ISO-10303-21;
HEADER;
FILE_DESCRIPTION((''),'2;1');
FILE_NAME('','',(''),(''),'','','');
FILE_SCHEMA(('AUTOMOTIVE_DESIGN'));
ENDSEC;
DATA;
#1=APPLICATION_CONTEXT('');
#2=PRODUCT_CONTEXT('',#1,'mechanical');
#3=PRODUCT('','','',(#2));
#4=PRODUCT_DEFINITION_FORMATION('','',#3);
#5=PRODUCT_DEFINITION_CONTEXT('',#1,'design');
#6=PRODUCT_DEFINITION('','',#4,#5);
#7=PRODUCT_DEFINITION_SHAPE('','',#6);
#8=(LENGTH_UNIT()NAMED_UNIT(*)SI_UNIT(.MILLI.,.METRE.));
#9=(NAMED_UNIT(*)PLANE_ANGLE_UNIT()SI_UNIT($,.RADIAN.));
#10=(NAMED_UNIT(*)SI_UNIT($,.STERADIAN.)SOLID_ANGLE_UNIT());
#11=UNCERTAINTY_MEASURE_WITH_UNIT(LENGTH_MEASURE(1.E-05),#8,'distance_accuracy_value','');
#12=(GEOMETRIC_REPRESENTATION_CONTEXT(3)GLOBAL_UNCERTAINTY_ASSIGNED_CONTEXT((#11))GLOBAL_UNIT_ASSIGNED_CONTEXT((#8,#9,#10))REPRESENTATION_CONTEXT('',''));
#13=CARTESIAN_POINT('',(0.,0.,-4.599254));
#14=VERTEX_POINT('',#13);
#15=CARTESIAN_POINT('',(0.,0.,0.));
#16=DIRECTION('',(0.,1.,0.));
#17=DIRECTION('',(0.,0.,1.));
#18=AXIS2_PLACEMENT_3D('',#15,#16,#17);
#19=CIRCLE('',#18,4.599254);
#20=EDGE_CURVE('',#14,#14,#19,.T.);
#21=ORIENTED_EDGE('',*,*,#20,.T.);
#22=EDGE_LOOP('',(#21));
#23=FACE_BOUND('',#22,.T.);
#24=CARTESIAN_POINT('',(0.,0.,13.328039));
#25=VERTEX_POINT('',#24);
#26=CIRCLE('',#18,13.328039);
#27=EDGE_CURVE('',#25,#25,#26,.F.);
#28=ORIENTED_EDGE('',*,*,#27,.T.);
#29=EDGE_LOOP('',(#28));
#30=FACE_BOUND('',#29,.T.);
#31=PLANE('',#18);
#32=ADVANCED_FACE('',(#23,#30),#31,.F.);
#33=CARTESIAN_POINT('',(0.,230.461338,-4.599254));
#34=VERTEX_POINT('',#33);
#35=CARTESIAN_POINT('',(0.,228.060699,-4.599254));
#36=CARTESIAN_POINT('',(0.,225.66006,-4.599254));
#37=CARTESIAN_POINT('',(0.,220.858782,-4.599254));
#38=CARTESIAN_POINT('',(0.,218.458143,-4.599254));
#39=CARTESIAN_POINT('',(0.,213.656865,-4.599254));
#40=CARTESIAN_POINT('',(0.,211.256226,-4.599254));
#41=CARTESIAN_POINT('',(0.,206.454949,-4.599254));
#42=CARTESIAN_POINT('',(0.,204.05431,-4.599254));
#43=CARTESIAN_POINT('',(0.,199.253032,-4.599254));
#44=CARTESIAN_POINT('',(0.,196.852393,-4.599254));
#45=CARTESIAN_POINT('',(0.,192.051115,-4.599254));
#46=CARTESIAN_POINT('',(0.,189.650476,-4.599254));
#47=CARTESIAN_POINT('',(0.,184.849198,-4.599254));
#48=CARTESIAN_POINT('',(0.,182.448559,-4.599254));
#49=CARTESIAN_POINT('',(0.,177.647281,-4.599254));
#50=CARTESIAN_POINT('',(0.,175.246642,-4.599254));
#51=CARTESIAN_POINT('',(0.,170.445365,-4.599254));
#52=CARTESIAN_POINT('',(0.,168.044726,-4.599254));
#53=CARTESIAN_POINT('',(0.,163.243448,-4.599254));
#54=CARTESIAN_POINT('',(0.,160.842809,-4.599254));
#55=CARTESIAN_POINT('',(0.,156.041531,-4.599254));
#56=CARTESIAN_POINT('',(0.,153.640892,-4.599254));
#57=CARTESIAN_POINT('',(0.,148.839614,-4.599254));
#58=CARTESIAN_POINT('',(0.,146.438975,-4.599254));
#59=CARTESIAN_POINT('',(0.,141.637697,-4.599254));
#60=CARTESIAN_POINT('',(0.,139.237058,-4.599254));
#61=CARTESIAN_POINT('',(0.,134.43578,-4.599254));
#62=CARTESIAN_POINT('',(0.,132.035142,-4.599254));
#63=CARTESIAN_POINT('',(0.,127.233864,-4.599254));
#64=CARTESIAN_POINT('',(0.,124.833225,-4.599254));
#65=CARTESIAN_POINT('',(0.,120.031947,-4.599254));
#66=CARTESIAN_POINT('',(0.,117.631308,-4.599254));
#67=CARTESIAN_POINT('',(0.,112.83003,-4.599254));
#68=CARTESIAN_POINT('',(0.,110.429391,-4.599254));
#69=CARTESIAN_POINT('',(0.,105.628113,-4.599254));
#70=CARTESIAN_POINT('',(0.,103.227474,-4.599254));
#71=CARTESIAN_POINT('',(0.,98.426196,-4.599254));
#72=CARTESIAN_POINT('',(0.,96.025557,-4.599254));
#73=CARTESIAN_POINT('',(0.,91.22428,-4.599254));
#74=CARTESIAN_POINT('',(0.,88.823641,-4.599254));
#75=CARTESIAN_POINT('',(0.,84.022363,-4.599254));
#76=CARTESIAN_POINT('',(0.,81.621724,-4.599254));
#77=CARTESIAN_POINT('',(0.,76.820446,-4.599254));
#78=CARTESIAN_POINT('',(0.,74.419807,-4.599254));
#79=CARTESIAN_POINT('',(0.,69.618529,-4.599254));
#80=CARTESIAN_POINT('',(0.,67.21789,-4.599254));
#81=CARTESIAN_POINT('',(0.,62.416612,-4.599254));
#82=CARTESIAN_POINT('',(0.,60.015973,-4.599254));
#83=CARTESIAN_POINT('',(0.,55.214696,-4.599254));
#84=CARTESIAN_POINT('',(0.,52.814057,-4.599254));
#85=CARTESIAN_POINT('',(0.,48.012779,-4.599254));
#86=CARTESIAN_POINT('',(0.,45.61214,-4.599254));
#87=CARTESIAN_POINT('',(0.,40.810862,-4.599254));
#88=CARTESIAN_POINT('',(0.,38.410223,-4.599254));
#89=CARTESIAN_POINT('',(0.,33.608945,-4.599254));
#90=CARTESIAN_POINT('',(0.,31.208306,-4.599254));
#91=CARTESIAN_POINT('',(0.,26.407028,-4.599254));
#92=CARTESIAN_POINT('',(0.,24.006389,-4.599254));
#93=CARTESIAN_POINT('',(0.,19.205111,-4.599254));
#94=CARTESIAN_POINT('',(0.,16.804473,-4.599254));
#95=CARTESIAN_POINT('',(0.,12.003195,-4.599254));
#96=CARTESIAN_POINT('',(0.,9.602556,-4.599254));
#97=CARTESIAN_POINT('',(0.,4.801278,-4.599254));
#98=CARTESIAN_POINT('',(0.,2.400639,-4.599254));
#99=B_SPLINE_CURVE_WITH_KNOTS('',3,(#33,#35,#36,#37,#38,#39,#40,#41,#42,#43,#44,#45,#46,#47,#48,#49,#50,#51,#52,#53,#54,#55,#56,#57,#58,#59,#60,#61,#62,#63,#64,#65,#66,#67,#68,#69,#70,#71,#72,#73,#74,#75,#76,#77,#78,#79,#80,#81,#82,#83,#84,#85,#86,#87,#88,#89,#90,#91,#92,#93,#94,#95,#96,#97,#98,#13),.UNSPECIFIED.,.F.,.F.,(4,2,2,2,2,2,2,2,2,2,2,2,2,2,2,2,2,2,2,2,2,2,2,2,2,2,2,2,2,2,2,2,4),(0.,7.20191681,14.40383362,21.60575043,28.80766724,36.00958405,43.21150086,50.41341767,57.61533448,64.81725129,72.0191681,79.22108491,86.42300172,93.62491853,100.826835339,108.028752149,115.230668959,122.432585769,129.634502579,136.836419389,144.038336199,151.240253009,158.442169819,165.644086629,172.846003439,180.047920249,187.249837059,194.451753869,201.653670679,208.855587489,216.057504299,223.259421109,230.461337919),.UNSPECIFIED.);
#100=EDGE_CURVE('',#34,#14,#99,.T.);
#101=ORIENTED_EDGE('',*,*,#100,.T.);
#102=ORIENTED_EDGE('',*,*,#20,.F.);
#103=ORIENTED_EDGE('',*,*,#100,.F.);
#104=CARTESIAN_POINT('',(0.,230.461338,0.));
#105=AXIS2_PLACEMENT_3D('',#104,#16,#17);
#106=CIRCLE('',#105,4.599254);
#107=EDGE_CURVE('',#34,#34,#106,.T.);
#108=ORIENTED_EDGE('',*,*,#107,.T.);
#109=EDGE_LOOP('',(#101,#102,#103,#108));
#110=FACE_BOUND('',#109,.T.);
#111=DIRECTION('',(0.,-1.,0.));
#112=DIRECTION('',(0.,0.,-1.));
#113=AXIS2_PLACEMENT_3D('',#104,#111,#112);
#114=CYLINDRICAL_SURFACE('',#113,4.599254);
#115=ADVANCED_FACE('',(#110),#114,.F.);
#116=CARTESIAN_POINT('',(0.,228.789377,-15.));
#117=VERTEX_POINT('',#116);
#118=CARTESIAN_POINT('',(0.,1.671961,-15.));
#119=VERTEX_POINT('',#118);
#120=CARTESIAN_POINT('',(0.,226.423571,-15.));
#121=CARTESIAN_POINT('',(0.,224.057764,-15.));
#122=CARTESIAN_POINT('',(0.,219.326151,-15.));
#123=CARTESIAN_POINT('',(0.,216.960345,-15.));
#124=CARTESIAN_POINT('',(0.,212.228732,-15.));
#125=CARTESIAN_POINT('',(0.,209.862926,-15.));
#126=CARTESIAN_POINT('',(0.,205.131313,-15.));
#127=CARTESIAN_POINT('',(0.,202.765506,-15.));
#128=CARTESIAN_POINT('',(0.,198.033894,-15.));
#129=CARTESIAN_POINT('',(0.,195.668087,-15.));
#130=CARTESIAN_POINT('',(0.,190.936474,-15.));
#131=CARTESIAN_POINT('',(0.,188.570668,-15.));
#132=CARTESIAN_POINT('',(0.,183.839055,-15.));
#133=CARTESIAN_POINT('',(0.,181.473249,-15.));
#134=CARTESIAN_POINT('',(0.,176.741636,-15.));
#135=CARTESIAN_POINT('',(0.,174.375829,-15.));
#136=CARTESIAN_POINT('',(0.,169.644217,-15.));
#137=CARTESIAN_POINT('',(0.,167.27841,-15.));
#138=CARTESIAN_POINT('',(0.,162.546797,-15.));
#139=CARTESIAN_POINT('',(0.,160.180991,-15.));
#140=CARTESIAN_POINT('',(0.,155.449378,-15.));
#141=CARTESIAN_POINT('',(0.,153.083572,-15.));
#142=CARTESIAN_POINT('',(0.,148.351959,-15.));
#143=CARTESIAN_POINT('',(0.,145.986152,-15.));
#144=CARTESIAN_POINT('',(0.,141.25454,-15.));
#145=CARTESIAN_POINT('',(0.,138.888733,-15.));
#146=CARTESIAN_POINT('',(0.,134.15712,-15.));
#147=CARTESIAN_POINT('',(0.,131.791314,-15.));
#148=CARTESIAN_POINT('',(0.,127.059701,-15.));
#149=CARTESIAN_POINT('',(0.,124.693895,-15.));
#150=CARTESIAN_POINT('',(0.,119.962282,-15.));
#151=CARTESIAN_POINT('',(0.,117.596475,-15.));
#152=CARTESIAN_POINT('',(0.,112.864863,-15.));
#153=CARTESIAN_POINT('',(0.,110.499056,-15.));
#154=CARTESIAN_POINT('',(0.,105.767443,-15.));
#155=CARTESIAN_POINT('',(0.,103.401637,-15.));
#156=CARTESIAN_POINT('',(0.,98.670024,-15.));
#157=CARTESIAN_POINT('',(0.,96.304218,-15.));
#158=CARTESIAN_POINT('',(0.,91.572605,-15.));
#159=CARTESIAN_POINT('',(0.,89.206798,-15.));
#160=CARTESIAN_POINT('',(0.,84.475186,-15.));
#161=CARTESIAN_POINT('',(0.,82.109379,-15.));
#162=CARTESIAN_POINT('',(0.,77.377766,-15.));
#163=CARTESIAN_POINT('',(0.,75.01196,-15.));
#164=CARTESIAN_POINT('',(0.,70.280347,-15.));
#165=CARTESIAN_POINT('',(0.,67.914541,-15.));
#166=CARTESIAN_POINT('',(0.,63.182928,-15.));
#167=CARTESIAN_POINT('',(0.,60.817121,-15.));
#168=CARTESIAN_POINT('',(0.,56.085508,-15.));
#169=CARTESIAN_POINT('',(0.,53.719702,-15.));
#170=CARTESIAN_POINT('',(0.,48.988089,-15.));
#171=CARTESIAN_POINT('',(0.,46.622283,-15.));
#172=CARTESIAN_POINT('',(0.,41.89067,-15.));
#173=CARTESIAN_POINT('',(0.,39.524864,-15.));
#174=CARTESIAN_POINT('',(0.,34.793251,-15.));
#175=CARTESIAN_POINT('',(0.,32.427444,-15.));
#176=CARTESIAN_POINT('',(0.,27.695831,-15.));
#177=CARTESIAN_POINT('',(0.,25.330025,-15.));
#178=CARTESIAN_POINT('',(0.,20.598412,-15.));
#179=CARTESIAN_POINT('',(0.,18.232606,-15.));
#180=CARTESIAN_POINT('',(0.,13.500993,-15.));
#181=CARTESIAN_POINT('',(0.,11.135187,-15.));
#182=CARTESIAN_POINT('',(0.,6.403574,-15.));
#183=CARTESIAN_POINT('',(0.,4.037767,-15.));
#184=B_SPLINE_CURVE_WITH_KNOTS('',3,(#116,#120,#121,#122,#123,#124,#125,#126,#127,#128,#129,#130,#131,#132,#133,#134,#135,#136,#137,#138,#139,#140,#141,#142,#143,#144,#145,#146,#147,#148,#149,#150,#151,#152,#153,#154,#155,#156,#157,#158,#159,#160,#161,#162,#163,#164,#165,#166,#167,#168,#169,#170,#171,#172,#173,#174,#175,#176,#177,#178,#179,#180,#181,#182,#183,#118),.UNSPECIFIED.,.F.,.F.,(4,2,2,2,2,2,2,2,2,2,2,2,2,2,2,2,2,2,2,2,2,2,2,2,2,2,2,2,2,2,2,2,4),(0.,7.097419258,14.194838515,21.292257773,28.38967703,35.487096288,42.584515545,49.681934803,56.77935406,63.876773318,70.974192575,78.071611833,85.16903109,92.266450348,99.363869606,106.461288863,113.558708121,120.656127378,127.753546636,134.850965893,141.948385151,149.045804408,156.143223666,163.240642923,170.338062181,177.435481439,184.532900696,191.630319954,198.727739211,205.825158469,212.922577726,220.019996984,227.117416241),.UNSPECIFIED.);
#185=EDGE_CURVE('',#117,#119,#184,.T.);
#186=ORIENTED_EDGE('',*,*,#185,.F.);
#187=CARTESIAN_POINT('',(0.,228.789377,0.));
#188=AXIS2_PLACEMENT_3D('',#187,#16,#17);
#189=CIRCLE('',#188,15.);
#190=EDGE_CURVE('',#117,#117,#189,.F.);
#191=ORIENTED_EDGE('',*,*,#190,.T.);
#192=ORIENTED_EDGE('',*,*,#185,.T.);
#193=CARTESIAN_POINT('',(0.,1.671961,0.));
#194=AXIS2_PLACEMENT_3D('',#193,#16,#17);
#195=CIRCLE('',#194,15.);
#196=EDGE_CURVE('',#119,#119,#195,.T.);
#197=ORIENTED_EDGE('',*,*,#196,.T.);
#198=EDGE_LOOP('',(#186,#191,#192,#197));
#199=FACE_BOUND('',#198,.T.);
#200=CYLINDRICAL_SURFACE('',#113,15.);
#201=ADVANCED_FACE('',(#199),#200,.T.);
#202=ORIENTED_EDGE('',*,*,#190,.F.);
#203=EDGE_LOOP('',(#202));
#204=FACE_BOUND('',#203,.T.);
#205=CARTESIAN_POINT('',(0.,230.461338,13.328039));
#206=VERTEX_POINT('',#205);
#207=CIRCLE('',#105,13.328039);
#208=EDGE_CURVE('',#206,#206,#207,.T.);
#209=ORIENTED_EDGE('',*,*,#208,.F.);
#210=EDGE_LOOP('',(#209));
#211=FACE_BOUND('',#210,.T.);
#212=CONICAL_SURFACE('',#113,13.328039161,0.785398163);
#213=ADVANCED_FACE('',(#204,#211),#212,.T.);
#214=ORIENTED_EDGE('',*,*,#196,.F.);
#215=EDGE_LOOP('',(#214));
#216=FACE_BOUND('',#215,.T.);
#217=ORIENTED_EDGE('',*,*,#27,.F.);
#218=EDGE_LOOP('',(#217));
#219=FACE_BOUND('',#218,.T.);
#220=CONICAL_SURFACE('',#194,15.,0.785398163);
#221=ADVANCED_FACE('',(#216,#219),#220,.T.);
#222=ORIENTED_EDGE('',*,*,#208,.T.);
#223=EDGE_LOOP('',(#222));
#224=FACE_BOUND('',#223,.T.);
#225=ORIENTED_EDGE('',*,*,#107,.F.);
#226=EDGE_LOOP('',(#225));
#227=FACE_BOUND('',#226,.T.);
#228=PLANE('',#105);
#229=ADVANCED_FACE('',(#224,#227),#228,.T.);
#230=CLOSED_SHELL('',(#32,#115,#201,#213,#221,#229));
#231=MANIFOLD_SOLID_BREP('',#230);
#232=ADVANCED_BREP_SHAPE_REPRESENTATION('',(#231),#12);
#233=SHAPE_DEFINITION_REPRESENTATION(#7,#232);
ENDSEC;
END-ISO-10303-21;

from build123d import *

# Parameters (mm, degrees)
SKETCH1_R           = 15
BOSS_EXTRUDE1_DEPTH = 230.461337919
SKETCH2_R           = 4.599254251
CUT_EXTRUDE1_DEPTH  = 232.435581265
CHAMFER1_SIZE       = 1.671960839


with BuildPart() as part:
    # Sketch1 → Boss-Extrude1 (new body)
    with BuildSketch(Plane(origin=(0, 0, 0), x_dir=(1, 0, 0), z_dir=(0, 1, 0))):
        Circle(SKETCH1_R)
    extrude(amount=BOSS_EXTRUDE1_DEPTH)

    # Sketch2 → Cut-Extrude1 (cut, through all)
    with BuildSketch(Plane(origin=(0, 0, 0), x_dir=(1, 0, 0), z_dir=(0, 1, 0))):
        Circle(SKETCH2_R)
    extrude(amount=CUT_EXTRUDE1_DEPTH, mode=Mode.SUBTRACT)

    # Chamfer1
    chamfer1_edges = [part.edges().sort_by_distance(p)[0] for p in [
        (-15, 230.461337919, 0),
        (-15, 0, 0),
    ]]
    chamfer(chamfer1_edges, length=CHAMFER1_SIZE)


solid = part.part
